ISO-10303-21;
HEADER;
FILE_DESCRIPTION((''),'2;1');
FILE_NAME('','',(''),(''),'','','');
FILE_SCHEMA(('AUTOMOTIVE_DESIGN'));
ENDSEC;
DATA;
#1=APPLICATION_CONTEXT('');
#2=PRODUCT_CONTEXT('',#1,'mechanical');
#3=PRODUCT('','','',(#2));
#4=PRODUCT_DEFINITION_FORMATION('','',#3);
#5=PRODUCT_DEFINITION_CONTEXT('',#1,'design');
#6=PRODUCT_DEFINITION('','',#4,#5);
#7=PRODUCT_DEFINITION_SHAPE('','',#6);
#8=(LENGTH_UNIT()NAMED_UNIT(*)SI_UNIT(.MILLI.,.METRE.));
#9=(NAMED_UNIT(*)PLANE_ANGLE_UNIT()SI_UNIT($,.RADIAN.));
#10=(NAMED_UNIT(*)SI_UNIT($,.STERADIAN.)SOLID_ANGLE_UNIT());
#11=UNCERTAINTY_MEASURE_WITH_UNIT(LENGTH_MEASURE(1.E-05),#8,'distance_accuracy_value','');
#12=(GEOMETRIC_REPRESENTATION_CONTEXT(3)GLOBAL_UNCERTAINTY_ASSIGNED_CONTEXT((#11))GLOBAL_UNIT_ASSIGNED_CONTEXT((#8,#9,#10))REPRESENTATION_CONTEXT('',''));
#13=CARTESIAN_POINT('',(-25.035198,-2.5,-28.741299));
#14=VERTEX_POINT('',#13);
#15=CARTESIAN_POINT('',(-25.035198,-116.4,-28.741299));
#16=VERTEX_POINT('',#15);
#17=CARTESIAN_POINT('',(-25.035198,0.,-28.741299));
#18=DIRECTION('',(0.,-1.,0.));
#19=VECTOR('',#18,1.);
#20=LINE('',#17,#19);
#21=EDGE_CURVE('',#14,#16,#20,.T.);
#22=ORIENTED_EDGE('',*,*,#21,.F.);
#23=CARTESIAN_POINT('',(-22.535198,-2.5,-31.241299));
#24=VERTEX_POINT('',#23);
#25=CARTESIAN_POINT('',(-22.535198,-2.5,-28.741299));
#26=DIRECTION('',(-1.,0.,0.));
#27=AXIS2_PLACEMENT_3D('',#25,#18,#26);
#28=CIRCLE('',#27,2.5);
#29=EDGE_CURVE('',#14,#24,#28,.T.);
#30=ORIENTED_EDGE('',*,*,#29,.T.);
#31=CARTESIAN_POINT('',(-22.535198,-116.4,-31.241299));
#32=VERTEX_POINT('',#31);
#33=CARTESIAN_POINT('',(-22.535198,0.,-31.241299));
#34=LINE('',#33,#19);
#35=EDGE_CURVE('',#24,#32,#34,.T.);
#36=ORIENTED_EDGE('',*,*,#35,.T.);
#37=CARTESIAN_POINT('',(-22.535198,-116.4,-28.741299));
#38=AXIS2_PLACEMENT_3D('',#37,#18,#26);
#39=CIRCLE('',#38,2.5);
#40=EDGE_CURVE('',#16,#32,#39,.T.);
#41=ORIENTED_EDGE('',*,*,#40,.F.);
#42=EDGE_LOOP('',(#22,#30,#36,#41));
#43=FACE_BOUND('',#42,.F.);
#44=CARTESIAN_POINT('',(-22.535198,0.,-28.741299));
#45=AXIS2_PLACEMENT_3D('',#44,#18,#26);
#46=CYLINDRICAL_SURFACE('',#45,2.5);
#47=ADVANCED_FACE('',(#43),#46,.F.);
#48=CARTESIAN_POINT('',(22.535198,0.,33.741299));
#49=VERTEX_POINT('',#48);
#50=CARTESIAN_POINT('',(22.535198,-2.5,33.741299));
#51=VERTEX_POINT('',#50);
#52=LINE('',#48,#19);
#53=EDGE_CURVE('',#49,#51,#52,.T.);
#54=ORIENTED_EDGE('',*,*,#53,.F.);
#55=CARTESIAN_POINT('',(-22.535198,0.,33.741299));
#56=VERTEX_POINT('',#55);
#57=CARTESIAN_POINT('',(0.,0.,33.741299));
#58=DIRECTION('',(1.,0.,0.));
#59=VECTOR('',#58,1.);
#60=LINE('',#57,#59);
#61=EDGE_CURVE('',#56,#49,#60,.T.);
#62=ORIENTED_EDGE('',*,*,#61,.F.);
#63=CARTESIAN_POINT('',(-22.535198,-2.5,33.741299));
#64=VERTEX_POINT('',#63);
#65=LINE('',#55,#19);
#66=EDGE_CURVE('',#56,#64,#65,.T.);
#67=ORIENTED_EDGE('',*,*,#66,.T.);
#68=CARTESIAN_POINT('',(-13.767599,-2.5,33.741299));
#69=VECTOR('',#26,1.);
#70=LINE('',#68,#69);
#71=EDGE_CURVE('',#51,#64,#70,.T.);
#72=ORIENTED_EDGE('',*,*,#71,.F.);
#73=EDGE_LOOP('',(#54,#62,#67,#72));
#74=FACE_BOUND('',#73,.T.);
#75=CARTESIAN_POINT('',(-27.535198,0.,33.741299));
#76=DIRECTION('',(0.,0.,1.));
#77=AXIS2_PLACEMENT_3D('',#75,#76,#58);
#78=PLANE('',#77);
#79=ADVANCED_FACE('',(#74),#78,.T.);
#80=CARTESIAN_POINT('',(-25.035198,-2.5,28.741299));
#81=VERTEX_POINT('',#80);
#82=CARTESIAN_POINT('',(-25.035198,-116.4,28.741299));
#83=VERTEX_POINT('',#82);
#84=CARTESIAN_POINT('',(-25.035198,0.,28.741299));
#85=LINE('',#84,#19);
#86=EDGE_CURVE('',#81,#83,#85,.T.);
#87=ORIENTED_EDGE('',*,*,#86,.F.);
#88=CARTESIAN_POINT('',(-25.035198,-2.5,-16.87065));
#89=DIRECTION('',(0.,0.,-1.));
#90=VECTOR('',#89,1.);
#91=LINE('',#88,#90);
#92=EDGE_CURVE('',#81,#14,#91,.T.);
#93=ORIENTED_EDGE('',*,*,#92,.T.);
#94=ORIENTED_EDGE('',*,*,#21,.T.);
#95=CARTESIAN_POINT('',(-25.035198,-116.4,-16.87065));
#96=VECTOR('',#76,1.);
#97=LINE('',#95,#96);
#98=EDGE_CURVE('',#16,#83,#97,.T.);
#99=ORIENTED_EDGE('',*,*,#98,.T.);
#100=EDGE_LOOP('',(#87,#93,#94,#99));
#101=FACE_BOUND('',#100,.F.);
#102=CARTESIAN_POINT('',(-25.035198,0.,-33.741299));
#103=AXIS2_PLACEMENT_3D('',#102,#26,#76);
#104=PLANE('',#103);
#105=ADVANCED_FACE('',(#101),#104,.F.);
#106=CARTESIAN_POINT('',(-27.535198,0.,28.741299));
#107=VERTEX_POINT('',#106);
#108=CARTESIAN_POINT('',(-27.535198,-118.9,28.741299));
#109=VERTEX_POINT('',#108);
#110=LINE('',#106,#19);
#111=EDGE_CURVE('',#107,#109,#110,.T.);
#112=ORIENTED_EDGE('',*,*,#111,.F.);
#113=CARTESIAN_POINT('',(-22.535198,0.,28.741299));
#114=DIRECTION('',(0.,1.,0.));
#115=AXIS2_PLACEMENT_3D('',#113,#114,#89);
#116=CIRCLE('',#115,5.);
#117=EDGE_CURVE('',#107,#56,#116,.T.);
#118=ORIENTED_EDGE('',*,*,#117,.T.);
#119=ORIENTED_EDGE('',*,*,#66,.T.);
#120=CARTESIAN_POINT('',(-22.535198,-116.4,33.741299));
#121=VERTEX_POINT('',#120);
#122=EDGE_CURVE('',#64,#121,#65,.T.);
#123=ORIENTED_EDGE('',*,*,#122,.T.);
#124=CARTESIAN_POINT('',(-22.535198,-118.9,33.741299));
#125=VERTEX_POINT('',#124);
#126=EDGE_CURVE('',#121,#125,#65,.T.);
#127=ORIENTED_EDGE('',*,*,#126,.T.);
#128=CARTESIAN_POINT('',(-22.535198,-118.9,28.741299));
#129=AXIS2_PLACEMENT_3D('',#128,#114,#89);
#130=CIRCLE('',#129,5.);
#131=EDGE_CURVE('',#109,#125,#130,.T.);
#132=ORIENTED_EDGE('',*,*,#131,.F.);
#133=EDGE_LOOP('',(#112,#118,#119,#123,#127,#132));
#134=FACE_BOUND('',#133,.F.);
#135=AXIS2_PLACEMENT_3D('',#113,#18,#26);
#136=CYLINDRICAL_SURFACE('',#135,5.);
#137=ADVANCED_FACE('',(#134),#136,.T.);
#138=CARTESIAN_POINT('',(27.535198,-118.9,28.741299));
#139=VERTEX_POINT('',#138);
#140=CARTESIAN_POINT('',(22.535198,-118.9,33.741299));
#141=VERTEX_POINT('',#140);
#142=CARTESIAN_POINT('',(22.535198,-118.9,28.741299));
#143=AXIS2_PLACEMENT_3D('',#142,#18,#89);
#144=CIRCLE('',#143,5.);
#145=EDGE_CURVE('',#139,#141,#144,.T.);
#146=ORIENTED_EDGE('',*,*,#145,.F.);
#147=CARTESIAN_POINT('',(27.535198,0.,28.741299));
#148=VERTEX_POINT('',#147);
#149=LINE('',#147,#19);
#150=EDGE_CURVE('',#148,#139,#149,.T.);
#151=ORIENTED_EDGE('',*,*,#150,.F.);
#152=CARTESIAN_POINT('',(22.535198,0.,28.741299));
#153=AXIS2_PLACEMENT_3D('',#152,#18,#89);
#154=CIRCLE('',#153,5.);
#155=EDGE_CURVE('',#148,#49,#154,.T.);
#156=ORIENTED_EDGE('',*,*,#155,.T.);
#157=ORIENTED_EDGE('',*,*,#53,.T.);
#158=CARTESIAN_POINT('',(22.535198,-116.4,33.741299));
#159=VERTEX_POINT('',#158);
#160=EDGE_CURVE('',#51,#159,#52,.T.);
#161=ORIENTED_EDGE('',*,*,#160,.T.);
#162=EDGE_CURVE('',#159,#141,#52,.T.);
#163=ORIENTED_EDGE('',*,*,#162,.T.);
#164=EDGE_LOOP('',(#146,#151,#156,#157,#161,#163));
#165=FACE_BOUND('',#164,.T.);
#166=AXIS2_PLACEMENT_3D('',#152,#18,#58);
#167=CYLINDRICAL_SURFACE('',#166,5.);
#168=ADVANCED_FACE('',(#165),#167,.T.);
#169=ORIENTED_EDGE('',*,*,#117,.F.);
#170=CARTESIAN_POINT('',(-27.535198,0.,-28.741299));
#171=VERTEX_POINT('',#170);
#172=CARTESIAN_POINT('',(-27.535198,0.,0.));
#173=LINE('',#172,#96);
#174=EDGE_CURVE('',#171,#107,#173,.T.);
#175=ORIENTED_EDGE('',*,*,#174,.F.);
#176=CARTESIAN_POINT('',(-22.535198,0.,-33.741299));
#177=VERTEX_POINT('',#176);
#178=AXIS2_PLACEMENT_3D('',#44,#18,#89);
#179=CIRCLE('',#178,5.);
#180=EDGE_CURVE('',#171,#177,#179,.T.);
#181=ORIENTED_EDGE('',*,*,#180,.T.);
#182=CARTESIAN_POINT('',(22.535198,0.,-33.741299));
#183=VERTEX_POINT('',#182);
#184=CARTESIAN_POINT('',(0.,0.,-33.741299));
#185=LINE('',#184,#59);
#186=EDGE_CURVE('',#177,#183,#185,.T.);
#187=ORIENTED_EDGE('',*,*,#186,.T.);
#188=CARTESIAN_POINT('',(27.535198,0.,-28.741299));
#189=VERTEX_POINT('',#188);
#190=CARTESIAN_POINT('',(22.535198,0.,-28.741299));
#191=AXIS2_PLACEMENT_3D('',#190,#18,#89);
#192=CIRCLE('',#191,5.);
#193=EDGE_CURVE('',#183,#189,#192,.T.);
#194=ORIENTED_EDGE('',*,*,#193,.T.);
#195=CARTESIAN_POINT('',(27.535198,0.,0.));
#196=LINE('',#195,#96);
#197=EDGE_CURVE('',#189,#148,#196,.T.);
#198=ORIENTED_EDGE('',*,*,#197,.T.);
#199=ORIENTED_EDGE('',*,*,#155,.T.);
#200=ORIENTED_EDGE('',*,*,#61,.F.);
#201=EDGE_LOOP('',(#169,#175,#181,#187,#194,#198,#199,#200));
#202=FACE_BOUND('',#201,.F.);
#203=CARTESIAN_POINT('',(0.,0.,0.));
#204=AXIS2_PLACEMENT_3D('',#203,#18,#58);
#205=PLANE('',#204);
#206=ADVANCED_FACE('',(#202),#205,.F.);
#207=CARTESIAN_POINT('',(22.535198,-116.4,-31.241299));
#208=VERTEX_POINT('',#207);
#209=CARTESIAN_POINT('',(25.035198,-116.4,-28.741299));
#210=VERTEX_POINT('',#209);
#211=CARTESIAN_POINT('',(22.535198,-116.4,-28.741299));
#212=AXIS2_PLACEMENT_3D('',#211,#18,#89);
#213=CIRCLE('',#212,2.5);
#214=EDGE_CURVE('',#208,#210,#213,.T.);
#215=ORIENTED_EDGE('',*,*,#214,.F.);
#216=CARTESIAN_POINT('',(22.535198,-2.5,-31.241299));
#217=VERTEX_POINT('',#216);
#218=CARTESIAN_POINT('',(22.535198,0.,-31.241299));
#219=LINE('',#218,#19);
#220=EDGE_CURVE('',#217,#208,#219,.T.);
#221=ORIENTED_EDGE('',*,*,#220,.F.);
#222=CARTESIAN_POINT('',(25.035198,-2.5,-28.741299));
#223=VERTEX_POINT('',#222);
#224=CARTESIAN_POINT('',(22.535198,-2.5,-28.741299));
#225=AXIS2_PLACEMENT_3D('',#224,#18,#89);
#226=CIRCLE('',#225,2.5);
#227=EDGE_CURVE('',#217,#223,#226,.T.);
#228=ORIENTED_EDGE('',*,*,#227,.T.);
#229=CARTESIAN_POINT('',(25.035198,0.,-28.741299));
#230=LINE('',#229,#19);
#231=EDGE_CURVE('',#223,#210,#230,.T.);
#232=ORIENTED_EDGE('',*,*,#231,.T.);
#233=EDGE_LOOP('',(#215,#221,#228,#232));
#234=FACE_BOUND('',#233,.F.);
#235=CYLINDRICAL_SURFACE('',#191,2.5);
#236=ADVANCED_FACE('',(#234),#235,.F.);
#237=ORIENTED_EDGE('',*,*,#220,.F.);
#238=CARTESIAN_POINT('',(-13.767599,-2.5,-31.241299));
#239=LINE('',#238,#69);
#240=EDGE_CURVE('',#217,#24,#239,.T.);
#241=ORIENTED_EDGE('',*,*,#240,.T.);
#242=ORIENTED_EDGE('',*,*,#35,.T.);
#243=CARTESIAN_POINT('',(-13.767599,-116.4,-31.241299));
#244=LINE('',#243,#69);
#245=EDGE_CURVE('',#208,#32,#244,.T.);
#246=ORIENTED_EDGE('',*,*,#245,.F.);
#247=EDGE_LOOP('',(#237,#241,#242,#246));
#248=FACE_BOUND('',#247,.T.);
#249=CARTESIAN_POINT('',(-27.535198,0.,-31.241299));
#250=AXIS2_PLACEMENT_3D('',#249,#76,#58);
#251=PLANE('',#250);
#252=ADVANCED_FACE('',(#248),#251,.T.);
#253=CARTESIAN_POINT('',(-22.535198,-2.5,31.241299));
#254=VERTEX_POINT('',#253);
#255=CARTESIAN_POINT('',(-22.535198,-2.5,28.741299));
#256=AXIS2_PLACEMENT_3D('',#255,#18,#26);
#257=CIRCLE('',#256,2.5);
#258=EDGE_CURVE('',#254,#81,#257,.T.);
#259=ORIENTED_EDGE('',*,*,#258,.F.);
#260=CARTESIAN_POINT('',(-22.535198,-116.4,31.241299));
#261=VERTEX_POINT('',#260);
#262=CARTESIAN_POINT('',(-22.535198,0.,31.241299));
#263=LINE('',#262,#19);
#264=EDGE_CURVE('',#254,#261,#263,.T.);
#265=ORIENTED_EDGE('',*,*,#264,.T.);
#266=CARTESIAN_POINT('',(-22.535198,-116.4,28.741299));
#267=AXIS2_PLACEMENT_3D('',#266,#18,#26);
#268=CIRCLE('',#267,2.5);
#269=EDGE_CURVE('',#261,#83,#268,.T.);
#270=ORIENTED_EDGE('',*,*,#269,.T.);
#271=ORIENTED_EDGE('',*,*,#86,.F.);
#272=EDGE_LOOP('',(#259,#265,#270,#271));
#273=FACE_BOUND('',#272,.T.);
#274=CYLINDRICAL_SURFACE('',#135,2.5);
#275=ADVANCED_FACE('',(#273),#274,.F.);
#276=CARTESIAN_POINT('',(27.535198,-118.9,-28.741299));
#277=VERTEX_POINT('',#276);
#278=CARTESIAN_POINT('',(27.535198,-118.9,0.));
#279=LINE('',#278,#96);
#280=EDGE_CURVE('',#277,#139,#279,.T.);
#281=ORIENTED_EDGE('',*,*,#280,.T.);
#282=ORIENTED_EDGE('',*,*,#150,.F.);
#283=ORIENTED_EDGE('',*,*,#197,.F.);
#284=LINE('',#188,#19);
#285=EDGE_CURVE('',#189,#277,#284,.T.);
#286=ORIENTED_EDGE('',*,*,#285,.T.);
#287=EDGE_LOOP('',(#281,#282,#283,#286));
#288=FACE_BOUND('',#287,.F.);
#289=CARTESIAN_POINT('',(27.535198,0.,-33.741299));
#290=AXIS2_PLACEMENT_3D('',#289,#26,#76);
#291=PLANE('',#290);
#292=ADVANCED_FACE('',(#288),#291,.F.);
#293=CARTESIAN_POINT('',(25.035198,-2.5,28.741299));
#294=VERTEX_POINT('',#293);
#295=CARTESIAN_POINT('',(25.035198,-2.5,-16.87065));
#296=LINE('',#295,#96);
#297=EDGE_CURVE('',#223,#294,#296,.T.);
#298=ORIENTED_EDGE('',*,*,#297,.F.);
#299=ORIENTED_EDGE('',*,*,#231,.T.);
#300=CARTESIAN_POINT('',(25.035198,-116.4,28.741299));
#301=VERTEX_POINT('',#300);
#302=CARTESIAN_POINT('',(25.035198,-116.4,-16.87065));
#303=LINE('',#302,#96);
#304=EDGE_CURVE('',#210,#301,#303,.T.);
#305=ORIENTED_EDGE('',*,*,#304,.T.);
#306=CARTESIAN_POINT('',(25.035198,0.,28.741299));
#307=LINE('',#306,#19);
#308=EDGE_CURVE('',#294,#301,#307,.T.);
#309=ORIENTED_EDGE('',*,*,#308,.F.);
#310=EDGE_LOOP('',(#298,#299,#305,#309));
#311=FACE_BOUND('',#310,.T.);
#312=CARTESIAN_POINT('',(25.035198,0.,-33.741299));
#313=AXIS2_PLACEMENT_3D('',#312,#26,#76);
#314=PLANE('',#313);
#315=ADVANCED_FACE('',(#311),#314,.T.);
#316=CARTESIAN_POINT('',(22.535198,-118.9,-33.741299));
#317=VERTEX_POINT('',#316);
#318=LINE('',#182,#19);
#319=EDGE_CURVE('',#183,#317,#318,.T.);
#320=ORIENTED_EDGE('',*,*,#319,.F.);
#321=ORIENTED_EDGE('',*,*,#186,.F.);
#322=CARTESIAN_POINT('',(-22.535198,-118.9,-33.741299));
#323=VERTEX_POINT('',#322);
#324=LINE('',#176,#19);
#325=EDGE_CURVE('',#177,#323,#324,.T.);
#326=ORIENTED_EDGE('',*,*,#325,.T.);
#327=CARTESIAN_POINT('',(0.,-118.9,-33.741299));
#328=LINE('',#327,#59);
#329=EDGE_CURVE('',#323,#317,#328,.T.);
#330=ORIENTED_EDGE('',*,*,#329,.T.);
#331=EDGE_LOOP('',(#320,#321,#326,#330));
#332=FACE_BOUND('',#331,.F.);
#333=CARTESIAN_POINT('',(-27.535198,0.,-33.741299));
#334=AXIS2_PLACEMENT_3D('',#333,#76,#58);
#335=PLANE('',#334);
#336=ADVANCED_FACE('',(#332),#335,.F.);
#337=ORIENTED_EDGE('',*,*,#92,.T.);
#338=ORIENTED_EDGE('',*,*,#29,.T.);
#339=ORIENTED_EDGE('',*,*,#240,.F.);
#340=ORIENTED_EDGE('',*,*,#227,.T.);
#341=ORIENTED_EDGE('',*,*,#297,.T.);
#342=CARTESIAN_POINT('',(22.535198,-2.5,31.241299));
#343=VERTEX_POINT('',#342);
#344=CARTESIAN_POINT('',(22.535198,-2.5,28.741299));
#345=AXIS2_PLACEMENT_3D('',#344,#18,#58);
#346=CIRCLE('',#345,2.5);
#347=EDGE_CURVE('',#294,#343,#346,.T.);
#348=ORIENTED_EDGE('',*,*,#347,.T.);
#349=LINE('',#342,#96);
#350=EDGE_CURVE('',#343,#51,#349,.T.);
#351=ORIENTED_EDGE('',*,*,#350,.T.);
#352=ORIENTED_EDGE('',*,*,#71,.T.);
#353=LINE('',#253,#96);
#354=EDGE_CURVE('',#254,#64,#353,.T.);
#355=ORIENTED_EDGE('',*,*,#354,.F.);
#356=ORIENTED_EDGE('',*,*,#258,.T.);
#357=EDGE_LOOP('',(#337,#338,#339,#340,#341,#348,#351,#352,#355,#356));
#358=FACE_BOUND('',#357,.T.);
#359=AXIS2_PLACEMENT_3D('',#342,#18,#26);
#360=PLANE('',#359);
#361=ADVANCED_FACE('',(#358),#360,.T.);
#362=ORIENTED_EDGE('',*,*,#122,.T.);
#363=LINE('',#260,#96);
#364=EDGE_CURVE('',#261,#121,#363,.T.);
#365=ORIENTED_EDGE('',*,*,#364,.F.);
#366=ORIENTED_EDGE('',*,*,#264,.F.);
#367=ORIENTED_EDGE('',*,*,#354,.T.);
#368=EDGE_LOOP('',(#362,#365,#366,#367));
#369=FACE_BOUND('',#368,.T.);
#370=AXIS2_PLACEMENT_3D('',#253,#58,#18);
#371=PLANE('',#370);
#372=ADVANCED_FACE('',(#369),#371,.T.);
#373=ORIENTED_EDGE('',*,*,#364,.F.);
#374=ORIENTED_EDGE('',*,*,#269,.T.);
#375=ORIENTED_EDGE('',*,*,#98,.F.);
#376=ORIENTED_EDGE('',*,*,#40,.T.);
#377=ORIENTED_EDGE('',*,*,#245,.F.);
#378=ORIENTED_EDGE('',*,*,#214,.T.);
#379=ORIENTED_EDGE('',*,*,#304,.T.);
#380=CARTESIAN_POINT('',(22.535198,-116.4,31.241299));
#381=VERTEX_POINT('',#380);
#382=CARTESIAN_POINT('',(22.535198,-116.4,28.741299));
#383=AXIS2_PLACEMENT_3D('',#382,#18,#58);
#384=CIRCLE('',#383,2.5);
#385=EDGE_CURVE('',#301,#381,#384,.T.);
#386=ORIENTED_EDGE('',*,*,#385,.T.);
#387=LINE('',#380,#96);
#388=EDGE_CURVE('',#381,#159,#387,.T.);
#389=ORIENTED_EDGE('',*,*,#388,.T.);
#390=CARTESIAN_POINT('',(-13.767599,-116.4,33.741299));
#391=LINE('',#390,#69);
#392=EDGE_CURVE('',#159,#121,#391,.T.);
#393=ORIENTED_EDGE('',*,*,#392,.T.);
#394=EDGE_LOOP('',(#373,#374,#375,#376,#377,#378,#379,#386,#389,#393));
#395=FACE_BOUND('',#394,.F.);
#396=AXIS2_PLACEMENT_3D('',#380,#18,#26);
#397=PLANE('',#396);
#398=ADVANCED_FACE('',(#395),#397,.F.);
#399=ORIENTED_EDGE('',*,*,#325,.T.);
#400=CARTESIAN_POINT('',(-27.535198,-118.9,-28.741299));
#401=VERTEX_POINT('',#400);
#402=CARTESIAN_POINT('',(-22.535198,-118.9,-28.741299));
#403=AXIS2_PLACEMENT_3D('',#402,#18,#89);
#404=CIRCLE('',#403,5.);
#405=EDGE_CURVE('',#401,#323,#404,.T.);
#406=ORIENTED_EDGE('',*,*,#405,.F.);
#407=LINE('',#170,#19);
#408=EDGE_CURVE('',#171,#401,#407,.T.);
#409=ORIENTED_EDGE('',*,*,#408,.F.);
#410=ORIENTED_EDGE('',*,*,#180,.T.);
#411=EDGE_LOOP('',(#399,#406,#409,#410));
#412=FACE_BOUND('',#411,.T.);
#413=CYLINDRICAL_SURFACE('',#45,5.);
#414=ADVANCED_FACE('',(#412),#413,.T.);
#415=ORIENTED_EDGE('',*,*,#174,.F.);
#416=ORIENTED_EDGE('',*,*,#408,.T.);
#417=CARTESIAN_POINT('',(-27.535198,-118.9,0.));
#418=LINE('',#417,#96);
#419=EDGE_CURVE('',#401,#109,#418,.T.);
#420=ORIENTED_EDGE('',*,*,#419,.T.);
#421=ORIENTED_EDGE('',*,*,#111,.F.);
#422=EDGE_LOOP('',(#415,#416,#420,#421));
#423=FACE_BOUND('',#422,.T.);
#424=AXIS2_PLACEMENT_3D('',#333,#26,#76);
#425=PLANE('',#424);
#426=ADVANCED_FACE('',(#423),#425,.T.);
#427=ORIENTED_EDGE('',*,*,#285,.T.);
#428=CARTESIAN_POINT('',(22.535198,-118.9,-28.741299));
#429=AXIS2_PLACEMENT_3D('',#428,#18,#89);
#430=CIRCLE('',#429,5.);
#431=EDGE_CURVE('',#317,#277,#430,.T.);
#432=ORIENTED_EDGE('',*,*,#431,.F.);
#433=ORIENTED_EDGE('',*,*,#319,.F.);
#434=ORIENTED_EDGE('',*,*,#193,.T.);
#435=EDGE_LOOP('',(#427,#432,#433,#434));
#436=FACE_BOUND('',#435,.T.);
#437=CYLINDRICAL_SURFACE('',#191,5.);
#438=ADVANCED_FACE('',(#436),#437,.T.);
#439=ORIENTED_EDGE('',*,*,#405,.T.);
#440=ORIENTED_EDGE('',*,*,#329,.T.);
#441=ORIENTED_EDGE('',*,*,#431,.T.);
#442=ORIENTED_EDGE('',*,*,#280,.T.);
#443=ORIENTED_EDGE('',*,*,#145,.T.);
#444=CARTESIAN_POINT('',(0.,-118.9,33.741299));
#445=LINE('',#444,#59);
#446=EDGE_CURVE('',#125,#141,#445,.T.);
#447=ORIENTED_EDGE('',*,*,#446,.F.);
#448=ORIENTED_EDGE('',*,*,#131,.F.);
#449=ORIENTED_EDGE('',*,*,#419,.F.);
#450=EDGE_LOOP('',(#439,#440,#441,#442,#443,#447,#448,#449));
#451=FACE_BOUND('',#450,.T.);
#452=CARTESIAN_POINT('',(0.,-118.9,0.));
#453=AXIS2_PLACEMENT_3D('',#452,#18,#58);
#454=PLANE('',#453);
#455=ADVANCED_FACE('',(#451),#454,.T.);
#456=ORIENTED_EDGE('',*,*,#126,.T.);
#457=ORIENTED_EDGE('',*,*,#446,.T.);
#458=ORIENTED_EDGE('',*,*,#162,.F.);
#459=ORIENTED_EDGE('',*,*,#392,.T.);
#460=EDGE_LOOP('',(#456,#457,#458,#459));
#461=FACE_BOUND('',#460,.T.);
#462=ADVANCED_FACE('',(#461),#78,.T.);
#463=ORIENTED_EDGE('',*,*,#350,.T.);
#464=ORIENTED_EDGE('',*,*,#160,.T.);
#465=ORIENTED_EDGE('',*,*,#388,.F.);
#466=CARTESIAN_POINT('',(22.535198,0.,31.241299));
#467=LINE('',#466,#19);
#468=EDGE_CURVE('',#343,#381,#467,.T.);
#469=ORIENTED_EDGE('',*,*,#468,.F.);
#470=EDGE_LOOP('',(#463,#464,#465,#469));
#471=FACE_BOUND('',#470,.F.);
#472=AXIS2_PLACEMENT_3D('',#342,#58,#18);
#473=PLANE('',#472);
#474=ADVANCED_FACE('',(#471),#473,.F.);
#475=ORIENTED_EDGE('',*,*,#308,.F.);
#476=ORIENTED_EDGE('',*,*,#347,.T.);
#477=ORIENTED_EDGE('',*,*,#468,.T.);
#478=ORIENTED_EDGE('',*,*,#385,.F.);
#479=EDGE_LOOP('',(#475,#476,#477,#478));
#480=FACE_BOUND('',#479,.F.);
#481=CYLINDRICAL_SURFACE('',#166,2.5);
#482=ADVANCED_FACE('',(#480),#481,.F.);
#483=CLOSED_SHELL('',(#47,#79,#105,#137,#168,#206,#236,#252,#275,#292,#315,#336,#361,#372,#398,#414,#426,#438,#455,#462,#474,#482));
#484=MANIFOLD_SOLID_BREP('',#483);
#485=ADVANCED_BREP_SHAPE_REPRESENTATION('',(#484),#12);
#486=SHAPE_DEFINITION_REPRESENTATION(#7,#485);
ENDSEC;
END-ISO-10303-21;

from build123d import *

# Parameters (mm, degrees)
F0_W     = 55.0703965127
F0_H     = 67.4825981259
F1_DEPTH = 118.9
F2_R     = 5
F3_T     = -2.5


# Not quite as in the source:
# - a shell that OpenCascade refuses in one call is made with other operations: the cavity is built on its own and cut out


with BuildPart() as f1:
    # F0 (on Front) → F1 (new body)
    with BuildSketch(Plane.XZ):
        Rectangle(F0_W, F0_H)
    extrude(amount=F1_DEPTH)

    # F2
    f2_edges = [f1.edges().sort_by_distance(p)[0] for p in [
        (-27.535198, -59.45, 33.741299),
        (27.535198, -59.45, 33.741299),
        (-27.535198, -59.45, -33.741299),
        (27.535198, -59.45, -33.741299),
    ]]
    fillet(f2_edges, radius=F2_R)

    # F3: a shell. OpenCascade refuses it in one call, so the cavity is built on its own and cut out:
    # the body offset inwards by the wall thickness, plus a prism from it out through each open face.
    f3_core = offset(f1.part, amount=F3_T, mode=Mode.PRIVATE)
    f3_exits = [f3_core.faces().sort_by_distance(p)[0] for p in [
        (0, -59.45, 31.241299),
    ]]
    add(f3_core, mode=Mode.SUBTRACT)
    extrude(f3_exits, amount=-F3_T, mode=Mode.SUBTRACT)


solid = f1.part
